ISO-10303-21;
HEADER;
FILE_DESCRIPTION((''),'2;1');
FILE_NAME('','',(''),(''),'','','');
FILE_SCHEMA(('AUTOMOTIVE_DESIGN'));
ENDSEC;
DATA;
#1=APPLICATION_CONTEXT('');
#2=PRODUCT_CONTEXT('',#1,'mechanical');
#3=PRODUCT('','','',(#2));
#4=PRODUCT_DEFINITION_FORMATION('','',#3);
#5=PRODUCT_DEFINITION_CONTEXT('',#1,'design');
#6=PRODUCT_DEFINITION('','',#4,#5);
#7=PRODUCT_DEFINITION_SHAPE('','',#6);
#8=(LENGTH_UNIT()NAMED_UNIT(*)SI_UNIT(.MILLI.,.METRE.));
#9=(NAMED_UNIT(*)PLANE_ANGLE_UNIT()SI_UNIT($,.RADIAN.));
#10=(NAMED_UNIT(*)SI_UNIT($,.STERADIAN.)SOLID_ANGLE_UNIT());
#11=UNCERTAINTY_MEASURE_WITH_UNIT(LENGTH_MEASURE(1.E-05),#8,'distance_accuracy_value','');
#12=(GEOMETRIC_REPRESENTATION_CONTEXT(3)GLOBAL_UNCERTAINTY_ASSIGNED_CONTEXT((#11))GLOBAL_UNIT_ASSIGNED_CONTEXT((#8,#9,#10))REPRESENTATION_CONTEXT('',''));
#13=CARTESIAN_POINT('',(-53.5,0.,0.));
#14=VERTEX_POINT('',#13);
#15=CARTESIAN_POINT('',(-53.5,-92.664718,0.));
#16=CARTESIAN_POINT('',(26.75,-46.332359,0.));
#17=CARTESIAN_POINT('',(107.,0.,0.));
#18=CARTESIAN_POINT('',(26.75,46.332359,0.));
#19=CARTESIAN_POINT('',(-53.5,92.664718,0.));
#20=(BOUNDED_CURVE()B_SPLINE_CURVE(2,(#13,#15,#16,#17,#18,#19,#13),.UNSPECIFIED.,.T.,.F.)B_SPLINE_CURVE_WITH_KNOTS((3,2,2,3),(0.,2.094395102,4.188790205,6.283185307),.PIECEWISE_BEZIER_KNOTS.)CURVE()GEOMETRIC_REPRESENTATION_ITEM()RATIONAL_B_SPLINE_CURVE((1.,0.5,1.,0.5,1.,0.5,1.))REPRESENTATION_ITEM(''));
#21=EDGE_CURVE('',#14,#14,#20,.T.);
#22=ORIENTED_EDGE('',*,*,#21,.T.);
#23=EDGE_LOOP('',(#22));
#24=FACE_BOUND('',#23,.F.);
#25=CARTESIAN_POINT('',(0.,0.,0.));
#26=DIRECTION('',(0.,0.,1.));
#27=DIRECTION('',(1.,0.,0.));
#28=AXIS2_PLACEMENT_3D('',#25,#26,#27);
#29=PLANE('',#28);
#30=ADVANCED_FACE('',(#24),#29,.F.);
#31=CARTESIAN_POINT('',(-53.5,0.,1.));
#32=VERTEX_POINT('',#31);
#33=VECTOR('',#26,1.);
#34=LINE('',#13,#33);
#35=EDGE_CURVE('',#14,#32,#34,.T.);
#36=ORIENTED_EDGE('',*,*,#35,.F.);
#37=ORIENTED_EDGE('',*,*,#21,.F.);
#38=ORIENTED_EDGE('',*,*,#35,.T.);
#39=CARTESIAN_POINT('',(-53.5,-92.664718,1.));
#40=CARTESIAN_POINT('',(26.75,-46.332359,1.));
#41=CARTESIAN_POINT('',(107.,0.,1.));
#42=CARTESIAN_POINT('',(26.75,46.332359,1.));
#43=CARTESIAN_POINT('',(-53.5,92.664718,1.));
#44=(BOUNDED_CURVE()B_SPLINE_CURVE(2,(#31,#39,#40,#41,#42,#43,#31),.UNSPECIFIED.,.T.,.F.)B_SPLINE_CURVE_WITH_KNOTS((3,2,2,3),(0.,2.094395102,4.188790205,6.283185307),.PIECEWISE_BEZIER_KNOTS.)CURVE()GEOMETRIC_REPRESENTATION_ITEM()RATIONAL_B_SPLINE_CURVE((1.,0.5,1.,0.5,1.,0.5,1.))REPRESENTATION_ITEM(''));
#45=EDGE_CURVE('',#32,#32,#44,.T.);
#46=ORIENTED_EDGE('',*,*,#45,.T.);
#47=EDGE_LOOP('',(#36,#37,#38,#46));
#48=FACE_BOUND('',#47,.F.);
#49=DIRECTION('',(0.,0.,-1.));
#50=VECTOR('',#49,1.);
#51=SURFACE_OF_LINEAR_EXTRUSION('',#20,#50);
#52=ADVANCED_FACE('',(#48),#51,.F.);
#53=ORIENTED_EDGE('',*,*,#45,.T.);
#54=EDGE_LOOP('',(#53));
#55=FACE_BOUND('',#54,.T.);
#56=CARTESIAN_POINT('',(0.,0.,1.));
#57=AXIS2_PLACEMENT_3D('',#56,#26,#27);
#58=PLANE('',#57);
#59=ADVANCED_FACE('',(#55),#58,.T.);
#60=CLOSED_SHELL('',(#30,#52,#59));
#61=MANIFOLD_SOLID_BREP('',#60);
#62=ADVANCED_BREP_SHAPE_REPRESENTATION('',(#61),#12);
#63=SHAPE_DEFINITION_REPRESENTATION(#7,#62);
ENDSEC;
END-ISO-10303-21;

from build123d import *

# Parameters (mm, degrees)
F1_DEPTH = 1


# Not quite as in the source:
# - a feature names something its author has since deleted; it is built from what else it names


with BuildPart() as f1:
    # F0 (on Top) → F1 (new body)
    with BuildSketch(Plane.XY):
        with BuildLine():
            add(Edge.make_bspline(
                [(-53.5, 0), (-53.5, -92.6647182049), (26.75, -46.3323591025), (107, 0), (26.75, 46.3323591025), (-53.5, 92.6647182049), (-53.5, 0)],
                knots=[0, 0, 0, 2.0943951024, 2.0943951024, 4.1887902048, 4.1887902048, 6.2831853072, 6.2831853072, 6.2831853072], degree=2, weights=[1, 0.5, 1, 0.5, 1, 0.5, 1]))
        make_face()
    extrude(amount=F1_DEPTH)


solid = f1.part
